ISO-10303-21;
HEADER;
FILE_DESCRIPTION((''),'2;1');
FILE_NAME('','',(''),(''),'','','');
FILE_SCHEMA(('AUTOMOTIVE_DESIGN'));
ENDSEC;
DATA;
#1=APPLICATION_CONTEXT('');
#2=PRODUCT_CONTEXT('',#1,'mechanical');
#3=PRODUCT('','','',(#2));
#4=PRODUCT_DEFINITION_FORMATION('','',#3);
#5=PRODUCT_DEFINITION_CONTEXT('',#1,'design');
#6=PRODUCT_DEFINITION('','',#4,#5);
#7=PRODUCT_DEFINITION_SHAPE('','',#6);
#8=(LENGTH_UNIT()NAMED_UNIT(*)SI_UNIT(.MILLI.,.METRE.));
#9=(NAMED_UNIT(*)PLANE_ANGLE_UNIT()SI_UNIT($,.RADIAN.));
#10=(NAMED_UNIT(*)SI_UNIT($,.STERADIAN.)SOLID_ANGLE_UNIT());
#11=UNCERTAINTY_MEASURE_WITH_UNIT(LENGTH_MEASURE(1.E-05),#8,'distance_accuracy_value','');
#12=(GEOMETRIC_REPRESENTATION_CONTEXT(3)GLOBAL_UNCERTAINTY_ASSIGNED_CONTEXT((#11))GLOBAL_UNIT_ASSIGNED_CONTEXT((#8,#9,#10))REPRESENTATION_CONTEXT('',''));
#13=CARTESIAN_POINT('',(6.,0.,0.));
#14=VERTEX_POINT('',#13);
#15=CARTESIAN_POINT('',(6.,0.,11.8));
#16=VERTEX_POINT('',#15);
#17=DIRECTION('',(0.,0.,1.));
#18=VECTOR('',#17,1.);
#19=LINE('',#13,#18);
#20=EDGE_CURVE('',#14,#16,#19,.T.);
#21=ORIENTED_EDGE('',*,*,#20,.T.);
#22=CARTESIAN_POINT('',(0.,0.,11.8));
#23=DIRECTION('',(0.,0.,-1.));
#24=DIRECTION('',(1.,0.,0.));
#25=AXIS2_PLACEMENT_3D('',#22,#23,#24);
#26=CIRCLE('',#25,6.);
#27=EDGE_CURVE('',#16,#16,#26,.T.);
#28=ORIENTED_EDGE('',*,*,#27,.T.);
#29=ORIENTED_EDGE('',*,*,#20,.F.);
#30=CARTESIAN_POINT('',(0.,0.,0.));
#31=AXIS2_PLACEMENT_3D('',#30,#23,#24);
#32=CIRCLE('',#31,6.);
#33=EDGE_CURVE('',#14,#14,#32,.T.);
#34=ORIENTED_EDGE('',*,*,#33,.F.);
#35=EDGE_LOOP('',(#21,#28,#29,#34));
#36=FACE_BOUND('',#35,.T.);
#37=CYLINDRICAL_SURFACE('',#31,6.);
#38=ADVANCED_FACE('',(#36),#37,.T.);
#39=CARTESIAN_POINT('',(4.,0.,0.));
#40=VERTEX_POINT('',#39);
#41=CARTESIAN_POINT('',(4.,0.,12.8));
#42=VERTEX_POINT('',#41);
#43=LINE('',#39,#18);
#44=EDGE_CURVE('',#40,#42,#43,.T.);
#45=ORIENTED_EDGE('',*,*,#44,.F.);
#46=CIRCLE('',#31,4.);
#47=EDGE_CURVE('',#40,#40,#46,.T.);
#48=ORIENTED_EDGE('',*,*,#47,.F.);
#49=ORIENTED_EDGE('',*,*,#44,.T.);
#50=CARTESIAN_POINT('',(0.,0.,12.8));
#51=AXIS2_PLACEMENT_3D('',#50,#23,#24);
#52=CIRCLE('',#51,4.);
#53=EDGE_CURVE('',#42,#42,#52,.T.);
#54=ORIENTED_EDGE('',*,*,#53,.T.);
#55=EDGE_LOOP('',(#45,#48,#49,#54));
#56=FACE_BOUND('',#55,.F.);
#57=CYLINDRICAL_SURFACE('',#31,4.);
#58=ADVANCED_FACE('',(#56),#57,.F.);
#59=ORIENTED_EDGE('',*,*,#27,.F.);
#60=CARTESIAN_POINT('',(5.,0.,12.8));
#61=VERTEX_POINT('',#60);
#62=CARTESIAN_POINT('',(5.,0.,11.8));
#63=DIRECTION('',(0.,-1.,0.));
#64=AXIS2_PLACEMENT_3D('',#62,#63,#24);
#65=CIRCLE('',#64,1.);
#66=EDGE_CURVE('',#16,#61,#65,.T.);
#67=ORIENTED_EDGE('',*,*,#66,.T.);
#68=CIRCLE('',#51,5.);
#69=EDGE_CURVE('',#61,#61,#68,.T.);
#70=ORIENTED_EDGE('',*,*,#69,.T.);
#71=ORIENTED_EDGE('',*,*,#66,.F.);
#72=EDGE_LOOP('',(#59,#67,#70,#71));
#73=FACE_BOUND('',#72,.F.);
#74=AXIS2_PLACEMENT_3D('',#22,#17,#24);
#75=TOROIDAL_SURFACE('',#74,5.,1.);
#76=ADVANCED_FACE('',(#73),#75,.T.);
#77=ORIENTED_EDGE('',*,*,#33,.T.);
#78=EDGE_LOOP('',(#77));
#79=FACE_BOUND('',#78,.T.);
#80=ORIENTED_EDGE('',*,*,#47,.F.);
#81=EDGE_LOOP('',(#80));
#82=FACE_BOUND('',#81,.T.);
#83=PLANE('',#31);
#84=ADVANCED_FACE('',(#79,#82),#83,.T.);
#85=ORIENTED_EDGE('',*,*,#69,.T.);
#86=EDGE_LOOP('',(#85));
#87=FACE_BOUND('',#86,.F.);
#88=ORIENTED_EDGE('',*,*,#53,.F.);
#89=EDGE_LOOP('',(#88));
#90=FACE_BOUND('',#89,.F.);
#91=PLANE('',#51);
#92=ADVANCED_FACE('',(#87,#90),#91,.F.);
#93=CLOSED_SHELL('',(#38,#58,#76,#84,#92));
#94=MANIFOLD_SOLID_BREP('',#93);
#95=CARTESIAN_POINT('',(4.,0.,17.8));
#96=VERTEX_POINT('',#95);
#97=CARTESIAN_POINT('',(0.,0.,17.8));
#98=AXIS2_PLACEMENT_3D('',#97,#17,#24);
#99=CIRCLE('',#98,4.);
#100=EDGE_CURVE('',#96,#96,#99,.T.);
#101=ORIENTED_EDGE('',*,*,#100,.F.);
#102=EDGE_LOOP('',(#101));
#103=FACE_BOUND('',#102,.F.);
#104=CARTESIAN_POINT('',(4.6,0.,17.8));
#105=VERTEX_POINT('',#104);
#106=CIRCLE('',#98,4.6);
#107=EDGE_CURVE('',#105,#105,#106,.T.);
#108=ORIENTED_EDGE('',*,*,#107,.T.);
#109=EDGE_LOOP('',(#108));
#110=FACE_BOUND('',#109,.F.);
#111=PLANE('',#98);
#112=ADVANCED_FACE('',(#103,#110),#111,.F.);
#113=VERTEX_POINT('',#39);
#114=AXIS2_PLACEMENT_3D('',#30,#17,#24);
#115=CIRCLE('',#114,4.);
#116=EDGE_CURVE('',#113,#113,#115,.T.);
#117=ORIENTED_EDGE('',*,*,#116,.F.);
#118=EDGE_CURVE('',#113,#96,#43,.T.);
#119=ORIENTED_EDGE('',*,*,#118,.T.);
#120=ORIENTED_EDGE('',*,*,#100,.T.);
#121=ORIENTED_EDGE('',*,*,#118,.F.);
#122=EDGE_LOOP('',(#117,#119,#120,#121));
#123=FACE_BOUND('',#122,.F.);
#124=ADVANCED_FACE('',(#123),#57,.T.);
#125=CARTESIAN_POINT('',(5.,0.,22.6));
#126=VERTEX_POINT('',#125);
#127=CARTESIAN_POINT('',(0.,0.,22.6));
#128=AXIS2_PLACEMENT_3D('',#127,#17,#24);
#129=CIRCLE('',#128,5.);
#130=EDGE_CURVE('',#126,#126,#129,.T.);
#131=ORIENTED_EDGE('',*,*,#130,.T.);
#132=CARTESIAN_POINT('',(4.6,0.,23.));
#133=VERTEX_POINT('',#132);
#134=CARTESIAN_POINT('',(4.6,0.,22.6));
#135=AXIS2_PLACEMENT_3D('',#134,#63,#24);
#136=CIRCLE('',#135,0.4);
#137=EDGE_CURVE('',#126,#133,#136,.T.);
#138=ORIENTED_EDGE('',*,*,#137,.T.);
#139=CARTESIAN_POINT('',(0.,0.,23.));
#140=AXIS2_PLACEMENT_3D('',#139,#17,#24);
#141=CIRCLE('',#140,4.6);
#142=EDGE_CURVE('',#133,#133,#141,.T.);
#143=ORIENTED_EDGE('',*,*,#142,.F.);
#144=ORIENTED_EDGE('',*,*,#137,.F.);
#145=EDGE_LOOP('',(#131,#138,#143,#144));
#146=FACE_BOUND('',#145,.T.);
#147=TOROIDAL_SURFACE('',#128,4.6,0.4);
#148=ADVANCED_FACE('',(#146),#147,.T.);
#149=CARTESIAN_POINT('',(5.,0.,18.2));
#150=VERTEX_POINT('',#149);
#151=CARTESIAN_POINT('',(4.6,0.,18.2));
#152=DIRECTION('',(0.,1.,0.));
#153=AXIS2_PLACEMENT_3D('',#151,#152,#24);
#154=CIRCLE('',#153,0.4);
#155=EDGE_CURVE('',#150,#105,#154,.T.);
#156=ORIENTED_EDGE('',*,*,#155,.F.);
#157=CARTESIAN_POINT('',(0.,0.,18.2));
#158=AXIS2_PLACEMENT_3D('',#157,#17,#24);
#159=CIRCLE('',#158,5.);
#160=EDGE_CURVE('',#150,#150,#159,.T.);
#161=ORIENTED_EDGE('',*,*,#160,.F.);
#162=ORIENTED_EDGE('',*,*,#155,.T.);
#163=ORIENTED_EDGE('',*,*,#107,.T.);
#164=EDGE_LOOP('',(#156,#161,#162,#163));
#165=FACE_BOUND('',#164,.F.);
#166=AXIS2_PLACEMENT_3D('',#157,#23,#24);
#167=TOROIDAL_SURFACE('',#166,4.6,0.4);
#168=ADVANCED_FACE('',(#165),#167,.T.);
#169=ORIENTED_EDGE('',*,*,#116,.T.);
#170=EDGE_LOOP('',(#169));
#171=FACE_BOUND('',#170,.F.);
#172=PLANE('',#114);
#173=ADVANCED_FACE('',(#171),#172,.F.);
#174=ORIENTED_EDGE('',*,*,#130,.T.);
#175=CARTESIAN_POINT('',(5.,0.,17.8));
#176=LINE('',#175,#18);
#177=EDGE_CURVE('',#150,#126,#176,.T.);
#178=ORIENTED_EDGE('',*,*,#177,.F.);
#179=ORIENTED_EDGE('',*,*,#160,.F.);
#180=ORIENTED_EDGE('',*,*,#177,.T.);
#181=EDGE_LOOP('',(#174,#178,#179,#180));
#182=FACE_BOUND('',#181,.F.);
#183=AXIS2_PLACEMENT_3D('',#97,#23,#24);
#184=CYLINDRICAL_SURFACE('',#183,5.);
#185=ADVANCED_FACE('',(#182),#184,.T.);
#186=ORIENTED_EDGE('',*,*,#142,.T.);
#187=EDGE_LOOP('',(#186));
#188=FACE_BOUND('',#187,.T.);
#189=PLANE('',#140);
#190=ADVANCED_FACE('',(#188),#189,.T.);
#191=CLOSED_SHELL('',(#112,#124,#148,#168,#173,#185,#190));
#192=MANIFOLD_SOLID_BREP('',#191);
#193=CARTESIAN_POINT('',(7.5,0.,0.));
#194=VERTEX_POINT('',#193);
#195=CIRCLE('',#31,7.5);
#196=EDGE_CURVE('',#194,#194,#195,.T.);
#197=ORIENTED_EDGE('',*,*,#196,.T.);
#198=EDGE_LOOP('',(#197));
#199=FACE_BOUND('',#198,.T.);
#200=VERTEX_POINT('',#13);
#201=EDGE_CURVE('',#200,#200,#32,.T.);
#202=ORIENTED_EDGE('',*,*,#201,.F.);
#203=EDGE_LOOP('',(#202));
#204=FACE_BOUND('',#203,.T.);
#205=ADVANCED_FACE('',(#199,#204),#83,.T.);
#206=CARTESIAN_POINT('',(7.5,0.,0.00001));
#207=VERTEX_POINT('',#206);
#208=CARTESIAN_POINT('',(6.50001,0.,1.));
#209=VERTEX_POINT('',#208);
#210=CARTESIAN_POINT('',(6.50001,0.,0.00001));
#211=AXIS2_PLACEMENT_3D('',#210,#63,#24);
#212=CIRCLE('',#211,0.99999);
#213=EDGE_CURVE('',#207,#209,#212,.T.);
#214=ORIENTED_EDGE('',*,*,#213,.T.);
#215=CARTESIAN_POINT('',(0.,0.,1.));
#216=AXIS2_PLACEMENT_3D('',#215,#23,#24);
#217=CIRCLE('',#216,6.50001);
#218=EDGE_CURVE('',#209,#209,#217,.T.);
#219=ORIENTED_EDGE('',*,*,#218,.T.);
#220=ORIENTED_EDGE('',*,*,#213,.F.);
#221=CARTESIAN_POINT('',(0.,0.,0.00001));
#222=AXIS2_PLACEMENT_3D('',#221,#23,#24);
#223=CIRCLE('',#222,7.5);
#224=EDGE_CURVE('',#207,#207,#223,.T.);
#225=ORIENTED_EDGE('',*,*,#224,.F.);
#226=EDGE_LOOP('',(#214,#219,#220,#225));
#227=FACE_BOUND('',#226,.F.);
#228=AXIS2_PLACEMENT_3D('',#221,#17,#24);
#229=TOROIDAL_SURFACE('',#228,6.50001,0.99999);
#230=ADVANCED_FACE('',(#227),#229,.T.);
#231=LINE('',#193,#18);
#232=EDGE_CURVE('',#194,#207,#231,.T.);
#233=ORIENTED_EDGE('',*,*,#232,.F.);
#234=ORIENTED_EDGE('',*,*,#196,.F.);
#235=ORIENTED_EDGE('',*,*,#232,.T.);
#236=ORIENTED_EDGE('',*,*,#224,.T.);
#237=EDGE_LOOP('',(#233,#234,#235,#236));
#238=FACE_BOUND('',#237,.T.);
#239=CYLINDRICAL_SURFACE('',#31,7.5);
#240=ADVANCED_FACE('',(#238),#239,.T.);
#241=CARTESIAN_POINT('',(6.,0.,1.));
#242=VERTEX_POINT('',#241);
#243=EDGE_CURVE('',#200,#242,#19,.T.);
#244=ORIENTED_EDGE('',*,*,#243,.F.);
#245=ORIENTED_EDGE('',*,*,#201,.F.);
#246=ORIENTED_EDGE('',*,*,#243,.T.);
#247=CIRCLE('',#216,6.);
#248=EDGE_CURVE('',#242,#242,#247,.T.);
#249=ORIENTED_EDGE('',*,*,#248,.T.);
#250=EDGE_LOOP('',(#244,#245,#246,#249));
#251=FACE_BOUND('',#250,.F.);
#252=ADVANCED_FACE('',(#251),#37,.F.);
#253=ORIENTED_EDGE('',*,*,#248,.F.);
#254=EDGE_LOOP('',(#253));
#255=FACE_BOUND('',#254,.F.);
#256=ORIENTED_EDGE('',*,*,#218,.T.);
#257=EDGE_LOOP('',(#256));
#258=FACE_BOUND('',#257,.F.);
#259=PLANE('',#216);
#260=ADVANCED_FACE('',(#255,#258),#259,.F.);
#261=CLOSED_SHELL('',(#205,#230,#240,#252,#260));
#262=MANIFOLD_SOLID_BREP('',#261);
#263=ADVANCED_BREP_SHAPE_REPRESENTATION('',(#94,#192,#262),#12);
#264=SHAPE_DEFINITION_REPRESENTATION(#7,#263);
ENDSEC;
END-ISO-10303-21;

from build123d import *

# Parameters (mm, degrees)
F0_R     = 4
F1_DEPTH = 17.8
F2_R     = 5
F2_R_2   = 4
F3_DEPTH = 5.2
F4_R     = 0.4
F5_R     = 6
F5_R_2   = 4
F6_DEPTH = 12.8
F7_R     = 7.5
F7_R_2   = 6
F8_DEPTH = 1
F9_R     = 0.99999
F10_R    = 1


# Not quite as in the source:
# - a fillet or chamfer is up to 0.001 mm smaller than in the source, because OpenCascade refuses the exact size


with BuildPart() as f1:
    # F0 (on Top) → F1 (new body)
    with BuildSketch(Plane.XY):
        Circle(F0_R)
    extrude(amount=F1_DEPTH)

    # F2 (on face) → F3 (join)
    with BuildSketch(Plane.XY.offset(17.8)):
        Circle(F2_R)
        Circle(F2_R_2, mode=Mode.SUBTRACT)
        Circle(F2_R_2)
    extrude(amount=F3_DEPTH)

    # F4
    f4_edges = [f1.edges().sort_by_distance(p)[0] for p in [
        (-5, 0, 23),
        (-5, 0, 17.8),
    ]]
    fillet(f4_edges, radius=F4_R)


with BuildPart() as f6:
    # F5 (on face) → F6 (new body)
    with BuildSketch(Plane(origin=(0, 0, 0), x_dir=(1, 0, 0), z_dir=(0, 0, -1))):
        Circle(F5_R)
        Circle(F5_R_2, mode=Mode.SUBTRACT)
    extrude(amount=-F6_DEPTH)

    # F10
    f10_edges = [f6.edges().sort_by_distance(p)[0] for p in [
        (-6, 0, 12.8),
    ]]
    fillet(f10_edges, radius=F10_R)


with BuildPart() as f8:
    # F7 (on face) → F8 (new body)
    with BuildSketch(Plane(origin=(0, 0, 0), x_dir=(1, 0, 0), z_dir=(0, 0, -1))):
        Circle(F7_R)
        Circle(F7_R_2, mode=Mode.SUBTRACT)
    extrude(amount=-F8_DEPTH)

    # F9 (radius 1 in the source; OpenCascade refuses exactly that, so slightly less here)
    f9_edges = [f8.edges().sort_by_distance(p)[0] for p in [
        (-7.5, 0, 1),
    ]]
    fillet(f9_edges, radius=F9_R)


solid = Compound([f1.part, f6.part, f8.part])
